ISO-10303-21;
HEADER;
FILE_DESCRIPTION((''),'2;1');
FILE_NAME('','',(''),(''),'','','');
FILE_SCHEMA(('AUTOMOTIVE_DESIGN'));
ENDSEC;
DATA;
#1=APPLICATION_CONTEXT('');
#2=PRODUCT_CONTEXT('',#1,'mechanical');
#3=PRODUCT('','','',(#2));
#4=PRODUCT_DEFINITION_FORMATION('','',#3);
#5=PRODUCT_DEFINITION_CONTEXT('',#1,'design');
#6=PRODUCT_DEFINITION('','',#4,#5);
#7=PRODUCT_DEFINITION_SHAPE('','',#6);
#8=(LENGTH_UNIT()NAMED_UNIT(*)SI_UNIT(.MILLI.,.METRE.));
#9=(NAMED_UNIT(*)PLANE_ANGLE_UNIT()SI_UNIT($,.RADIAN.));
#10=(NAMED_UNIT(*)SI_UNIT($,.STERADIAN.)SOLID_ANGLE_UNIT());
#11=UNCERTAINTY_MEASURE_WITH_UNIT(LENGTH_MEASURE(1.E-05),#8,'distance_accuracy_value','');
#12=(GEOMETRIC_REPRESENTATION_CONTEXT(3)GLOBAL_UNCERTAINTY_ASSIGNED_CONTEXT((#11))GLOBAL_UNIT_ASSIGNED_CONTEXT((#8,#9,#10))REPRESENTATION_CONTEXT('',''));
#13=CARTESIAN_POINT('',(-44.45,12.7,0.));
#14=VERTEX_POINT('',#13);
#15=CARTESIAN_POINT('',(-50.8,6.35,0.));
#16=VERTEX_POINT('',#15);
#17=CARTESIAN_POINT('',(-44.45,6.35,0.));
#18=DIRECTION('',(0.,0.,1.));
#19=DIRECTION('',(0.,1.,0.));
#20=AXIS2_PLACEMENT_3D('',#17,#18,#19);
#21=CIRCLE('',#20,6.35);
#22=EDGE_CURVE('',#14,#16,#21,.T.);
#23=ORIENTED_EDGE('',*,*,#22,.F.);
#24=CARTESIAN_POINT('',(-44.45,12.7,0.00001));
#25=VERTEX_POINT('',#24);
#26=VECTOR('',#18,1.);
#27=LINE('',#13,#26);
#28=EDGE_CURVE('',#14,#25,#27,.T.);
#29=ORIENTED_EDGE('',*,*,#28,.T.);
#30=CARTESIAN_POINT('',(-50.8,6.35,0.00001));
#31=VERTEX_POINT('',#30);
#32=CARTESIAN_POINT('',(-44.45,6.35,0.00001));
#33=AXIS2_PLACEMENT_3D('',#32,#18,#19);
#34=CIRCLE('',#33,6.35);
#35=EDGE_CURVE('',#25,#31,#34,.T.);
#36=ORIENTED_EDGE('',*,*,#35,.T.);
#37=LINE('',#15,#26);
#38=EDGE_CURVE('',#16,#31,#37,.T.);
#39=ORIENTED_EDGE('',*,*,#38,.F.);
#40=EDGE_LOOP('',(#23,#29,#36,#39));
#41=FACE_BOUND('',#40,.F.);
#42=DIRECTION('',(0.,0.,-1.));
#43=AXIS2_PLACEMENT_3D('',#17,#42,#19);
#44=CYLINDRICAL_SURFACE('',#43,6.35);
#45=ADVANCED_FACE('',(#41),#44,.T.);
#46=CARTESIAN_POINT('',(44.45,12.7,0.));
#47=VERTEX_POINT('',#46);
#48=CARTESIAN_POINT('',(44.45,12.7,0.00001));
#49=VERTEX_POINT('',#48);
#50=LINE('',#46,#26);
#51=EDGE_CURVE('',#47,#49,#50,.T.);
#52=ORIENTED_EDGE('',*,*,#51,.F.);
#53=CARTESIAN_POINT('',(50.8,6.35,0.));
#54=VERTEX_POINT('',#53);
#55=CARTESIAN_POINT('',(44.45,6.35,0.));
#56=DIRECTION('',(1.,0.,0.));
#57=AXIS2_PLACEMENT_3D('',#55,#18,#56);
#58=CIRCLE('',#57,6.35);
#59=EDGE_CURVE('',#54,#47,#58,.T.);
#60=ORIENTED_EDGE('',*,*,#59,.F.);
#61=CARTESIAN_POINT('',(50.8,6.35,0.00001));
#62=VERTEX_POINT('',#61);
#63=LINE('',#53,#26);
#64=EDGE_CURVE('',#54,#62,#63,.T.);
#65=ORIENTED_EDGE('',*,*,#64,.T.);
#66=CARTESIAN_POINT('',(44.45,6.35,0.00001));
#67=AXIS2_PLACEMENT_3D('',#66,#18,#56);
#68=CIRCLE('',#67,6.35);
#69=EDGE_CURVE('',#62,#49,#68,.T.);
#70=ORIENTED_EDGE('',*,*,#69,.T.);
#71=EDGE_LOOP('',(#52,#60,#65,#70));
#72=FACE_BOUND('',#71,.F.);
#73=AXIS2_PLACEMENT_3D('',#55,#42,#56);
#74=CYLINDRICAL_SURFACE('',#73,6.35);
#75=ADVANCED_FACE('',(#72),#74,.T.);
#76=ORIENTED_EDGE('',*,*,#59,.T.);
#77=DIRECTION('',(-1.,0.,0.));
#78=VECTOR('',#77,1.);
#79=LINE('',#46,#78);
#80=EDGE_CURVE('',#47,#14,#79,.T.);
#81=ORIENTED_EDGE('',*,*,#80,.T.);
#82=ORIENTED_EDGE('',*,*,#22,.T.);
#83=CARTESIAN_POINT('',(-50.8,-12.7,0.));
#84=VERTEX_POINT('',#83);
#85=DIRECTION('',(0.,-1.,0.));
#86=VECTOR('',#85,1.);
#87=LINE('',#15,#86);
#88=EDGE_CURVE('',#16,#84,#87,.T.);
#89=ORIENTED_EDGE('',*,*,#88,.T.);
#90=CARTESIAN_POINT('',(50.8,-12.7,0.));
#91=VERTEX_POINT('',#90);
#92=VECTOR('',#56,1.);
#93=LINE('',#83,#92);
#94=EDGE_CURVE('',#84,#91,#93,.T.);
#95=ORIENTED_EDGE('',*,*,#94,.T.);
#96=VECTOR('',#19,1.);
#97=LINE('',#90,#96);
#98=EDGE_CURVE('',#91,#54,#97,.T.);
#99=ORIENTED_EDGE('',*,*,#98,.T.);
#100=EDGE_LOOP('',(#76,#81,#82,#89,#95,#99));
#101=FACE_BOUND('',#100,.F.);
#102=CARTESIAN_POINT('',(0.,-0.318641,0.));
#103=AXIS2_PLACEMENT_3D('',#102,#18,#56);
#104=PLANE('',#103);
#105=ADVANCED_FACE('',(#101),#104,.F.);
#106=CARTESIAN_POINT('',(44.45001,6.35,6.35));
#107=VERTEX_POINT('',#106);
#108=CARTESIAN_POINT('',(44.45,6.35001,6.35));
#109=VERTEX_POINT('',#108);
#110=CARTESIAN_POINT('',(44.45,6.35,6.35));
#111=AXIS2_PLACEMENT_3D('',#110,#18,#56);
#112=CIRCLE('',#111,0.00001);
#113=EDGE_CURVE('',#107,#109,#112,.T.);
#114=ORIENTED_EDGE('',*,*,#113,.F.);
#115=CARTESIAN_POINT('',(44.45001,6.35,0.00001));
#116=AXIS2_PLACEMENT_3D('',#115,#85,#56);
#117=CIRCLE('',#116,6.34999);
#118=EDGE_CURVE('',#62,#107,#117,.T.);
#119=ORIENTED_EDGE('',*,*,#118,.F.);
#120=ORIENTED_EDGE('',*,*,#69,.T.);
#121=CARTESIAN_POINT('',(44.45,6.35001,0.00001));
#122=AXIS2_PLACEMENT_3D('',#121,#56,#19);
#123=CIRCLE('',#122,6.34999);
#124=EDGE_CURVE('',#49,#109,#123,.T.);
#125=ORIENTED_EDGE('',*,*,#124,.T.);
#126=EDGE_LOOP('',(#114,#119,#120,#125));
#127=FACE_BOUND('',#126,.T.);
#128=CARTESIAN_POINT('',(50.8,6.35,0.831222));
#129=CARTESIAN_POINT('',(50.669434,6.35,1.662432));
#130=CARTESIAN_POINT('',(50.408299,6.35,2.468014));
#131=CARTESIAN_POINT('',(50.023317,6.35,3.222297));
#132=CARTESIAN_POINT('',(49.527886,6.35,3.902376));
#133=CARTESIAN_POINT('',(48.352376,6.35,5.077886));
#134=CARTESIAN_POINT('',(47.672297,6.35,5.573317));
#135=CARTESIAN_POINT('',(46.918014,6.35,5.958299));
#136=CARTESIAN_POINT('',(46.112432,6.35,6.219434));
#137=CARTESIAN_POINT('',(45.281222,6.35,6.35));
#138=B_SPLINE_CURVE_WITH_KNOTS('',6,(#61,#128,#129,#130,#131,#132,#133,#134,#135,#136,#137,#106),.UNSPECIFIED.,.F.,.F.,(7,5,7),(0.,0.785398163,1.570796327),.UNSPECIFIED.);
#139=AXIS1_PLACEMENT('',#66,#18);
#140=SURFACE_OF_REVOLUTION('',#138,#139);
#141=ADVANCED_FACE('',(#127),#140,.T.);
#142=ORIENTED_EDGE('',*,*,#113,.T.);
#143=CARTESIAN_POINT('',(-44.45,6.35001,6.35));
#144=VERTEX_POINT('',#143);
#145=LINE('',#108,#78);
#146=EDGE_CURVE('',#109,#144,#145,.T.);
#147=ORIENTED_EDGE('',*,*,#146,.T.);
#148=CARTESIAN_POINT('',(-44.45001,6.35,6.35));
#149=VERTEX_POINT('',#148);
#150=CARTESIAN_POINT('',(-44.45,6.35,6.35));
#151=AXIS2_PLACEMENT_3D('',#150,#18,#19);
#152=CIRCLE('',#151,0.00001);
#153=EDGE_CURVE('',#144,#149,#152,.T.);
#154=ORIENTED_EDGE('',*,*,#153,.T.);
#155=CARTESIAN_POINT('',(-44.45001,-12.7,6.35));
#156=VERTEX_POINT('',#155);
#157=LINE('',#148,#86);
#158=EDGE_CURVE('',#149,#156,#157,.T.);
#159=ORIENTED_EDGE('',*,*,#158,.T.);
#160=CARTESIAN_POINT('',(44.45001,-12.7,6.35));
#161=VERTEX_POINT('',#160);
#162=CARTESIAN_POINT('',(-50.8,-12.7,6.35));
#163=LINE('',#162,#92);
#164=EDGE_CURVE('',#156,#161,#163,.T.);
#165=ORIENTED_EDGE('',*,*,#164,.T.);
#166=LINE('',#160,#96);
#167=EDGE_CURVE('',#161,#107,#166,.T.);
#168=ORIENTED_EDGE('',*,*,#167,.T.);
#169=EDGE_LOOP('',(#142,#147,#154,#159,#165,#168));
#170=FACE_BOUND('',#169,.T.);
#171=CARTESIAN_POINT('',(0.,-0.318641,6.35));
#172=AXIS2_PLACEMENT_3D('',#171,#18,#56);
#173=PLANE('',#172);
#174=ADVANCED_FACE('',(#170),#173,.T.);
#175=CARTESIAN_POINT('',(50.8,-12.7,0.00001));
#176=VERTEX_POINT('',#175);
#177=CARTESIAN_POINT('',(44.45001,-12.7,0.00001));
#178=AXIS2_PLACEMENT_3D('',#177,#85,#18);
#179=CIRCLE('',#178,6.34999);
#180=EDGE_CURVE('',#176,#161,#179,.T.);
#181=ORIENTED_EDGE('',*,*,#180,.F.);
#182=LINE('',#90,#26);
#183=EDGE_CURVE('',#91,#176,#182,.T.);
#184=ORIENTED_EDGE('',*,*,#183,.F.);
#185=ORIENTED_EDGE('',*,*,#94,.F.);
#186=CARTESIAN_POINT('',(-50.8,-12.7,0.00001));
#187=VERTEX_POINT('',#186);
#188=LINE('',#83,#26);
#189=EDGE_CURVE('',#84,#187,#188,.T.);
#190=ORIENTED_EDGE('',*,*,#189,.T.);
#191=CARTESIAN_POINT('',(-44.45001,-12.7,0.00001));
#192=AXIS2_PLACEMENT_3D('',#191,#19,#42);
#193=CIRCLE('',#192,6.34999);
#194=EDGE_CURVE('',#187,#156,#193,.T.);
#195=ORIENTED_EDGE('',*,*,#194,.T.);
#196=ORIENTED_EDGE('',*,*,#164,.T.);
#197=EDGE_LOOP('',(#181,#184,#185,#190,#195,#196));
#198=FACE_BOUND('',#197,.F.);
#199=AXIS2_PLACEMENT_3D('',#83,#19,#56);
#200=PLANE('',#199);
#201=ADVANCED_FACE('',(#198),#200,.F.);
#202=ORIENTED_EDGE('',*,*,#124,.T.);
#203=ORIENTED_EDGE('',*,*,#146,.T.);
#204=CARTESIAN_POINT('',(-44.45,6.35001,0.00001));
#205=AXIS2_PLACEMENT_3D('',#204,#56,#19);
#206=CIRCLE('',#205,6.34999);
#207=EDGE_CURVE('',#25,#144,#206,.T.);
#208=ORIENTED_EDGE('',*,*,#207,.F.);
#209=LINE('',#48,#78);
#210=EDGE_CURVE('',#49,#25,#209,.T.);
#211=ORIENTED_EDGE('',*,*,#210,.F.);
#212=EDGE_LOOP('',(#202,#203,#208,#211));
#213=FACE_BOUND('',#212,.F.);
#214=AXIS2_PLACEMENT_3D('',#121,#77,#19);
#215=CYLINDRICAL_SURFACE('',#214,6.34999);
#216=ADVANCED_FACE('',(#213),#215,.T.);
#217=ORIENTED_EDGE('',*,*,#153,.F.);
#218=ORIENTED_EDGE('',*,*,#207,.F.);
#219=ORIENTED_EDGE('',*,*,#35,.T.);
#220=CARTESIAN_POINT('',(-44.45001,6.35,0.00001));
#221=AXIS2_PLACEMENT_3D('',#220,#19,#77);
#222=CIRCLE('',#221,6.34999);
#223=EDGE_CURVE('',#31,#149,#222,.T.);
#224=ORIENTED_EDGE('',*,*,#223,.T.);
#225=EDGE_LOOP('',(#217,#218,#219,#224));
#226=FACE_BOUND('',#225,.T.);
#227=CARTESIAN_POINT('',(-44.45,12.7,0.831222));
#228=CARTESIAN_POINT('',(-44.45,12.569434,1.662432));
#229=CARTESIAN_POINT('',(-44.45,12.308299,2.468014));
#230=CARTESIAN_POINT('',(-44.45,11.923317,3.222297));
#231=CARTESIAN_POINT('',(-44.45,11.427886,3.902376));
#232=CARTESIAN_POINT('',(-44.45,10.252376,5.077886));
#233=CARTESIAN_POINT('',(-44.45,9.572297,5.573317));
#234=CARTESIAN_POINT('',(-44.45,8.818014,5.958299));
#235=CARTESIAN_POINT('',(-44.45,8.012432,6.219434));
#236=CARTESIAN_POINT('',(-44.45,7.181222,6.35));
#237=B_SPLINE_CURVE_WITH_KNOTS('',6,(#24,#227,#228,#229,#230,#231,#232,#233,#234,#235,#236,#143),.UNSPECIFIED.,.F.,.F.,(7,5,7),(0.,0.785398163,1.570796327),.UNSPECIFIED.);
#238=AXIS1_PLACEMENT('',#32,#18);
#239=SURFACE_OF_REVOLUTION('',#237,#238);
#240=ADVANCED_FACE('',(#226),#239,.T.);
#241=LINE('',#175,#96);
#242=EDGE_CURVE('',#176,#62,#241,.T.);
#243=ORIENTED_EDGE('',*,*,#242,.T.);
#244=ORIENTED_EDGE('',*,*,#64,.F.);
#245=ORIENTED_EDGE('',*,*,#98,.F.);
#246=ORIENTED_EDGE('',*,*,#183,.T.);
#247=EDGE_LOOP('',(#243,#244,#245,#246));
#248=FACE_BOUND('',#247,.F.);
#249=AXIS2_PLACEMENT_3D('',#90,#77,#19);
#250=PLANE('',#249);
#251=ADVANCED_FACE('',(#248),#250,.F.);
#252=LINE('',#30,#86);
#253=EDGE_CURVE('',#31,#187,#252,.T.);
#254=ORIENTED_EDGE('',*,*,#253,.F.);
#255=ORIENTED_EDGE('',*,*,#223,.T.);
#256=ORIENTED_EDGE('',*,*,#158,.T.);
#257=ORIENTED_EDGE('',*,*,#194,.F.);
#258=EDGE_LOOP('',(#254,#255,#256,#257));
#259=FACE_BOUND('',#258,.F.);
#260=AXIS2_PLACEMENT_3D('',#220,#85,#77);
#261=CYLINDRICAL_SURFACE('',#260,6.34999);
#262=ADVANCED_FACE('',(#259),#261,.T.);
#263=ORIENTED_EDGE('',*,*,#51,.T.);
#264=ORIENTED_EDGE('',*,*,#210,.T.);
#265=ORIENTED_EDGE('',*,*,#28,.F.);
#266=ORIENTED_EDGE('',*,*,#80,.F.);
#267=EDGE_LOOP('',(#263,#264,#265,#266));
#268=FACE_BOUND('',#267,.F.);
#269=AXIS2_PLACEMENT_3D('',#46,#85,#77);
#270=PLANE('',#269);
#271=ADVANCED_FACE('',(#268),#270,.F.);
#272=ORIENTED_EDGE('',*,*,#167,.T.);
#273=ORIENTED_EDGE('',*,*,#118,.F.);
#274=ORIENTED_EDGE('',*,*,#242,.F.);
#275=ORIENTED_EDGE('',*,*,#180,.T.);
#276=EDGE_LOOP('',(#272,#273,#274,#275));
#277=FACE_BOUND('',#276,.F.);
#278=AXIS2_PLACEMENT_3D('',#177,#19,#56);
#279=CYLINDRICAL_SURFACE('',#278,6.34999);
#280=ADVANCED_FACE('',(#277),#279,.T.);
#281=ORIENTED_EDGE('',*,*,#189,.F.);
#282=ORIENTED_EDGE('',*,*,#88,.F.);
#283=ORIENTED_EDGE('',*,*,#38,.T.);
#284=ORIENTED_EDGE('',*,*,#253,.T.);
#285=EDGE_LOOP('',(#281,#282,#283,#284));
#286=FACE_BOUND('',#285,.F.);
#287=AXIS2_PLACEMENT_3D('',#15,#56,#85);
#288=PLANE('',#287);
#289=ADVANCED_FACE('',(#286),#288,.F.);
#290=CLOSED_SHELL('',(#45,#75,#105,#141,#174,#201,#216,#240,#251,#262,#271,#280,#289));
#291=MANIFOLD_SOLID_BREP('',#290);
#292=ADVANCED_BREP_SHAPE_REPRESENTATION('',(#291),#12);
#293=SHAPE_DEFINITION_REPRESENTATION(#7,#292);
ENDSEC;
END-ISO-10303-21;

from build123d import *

# Parameters (mm, degrees)
F1_DEPTH = 6.35
F2_R     = 6.34999


# Not quite as in the source:
# - a fillet or chamfer is up to 0.001 mm smaller than in the source, because OpenCascade refuses the exact size


with BuildPart() as f1:
    # F0 (on Top) → F1 (new body)
    with BuildSketch(Plane.XY):
        with BuildLine():
            ThreePointArc((50.8, 6.35), (48.9401280605, 10.8401280605), (44.45, 12.7))
            Line((44.45, 12.7), (-44.45, 12.7))
            ThreePointArc((-44.45, 12.7), (-48.9401280605, 10.8401280605), (-50.8, 6.35))
            Line((-50.8, 6.35), (-50.8, -12.7))
            Line((-50.8, -12.7), (50.8, -12.7))
            Line((50.8, -12.7), (50.8, 6.35))
        make_face()
    extrude(amount=F1_DEPTH)

    # F2 (radius 6.35 in the source; OpenCascade refuses exactly that, so slightly less here)
    f2_edges = [f1.edges().sort_by_distance(p)[0] for p in [
        (0, 12.7, 6.35),
    ]]
    fillet(f2_edges, radius=F2_R)


solid = f1.part
